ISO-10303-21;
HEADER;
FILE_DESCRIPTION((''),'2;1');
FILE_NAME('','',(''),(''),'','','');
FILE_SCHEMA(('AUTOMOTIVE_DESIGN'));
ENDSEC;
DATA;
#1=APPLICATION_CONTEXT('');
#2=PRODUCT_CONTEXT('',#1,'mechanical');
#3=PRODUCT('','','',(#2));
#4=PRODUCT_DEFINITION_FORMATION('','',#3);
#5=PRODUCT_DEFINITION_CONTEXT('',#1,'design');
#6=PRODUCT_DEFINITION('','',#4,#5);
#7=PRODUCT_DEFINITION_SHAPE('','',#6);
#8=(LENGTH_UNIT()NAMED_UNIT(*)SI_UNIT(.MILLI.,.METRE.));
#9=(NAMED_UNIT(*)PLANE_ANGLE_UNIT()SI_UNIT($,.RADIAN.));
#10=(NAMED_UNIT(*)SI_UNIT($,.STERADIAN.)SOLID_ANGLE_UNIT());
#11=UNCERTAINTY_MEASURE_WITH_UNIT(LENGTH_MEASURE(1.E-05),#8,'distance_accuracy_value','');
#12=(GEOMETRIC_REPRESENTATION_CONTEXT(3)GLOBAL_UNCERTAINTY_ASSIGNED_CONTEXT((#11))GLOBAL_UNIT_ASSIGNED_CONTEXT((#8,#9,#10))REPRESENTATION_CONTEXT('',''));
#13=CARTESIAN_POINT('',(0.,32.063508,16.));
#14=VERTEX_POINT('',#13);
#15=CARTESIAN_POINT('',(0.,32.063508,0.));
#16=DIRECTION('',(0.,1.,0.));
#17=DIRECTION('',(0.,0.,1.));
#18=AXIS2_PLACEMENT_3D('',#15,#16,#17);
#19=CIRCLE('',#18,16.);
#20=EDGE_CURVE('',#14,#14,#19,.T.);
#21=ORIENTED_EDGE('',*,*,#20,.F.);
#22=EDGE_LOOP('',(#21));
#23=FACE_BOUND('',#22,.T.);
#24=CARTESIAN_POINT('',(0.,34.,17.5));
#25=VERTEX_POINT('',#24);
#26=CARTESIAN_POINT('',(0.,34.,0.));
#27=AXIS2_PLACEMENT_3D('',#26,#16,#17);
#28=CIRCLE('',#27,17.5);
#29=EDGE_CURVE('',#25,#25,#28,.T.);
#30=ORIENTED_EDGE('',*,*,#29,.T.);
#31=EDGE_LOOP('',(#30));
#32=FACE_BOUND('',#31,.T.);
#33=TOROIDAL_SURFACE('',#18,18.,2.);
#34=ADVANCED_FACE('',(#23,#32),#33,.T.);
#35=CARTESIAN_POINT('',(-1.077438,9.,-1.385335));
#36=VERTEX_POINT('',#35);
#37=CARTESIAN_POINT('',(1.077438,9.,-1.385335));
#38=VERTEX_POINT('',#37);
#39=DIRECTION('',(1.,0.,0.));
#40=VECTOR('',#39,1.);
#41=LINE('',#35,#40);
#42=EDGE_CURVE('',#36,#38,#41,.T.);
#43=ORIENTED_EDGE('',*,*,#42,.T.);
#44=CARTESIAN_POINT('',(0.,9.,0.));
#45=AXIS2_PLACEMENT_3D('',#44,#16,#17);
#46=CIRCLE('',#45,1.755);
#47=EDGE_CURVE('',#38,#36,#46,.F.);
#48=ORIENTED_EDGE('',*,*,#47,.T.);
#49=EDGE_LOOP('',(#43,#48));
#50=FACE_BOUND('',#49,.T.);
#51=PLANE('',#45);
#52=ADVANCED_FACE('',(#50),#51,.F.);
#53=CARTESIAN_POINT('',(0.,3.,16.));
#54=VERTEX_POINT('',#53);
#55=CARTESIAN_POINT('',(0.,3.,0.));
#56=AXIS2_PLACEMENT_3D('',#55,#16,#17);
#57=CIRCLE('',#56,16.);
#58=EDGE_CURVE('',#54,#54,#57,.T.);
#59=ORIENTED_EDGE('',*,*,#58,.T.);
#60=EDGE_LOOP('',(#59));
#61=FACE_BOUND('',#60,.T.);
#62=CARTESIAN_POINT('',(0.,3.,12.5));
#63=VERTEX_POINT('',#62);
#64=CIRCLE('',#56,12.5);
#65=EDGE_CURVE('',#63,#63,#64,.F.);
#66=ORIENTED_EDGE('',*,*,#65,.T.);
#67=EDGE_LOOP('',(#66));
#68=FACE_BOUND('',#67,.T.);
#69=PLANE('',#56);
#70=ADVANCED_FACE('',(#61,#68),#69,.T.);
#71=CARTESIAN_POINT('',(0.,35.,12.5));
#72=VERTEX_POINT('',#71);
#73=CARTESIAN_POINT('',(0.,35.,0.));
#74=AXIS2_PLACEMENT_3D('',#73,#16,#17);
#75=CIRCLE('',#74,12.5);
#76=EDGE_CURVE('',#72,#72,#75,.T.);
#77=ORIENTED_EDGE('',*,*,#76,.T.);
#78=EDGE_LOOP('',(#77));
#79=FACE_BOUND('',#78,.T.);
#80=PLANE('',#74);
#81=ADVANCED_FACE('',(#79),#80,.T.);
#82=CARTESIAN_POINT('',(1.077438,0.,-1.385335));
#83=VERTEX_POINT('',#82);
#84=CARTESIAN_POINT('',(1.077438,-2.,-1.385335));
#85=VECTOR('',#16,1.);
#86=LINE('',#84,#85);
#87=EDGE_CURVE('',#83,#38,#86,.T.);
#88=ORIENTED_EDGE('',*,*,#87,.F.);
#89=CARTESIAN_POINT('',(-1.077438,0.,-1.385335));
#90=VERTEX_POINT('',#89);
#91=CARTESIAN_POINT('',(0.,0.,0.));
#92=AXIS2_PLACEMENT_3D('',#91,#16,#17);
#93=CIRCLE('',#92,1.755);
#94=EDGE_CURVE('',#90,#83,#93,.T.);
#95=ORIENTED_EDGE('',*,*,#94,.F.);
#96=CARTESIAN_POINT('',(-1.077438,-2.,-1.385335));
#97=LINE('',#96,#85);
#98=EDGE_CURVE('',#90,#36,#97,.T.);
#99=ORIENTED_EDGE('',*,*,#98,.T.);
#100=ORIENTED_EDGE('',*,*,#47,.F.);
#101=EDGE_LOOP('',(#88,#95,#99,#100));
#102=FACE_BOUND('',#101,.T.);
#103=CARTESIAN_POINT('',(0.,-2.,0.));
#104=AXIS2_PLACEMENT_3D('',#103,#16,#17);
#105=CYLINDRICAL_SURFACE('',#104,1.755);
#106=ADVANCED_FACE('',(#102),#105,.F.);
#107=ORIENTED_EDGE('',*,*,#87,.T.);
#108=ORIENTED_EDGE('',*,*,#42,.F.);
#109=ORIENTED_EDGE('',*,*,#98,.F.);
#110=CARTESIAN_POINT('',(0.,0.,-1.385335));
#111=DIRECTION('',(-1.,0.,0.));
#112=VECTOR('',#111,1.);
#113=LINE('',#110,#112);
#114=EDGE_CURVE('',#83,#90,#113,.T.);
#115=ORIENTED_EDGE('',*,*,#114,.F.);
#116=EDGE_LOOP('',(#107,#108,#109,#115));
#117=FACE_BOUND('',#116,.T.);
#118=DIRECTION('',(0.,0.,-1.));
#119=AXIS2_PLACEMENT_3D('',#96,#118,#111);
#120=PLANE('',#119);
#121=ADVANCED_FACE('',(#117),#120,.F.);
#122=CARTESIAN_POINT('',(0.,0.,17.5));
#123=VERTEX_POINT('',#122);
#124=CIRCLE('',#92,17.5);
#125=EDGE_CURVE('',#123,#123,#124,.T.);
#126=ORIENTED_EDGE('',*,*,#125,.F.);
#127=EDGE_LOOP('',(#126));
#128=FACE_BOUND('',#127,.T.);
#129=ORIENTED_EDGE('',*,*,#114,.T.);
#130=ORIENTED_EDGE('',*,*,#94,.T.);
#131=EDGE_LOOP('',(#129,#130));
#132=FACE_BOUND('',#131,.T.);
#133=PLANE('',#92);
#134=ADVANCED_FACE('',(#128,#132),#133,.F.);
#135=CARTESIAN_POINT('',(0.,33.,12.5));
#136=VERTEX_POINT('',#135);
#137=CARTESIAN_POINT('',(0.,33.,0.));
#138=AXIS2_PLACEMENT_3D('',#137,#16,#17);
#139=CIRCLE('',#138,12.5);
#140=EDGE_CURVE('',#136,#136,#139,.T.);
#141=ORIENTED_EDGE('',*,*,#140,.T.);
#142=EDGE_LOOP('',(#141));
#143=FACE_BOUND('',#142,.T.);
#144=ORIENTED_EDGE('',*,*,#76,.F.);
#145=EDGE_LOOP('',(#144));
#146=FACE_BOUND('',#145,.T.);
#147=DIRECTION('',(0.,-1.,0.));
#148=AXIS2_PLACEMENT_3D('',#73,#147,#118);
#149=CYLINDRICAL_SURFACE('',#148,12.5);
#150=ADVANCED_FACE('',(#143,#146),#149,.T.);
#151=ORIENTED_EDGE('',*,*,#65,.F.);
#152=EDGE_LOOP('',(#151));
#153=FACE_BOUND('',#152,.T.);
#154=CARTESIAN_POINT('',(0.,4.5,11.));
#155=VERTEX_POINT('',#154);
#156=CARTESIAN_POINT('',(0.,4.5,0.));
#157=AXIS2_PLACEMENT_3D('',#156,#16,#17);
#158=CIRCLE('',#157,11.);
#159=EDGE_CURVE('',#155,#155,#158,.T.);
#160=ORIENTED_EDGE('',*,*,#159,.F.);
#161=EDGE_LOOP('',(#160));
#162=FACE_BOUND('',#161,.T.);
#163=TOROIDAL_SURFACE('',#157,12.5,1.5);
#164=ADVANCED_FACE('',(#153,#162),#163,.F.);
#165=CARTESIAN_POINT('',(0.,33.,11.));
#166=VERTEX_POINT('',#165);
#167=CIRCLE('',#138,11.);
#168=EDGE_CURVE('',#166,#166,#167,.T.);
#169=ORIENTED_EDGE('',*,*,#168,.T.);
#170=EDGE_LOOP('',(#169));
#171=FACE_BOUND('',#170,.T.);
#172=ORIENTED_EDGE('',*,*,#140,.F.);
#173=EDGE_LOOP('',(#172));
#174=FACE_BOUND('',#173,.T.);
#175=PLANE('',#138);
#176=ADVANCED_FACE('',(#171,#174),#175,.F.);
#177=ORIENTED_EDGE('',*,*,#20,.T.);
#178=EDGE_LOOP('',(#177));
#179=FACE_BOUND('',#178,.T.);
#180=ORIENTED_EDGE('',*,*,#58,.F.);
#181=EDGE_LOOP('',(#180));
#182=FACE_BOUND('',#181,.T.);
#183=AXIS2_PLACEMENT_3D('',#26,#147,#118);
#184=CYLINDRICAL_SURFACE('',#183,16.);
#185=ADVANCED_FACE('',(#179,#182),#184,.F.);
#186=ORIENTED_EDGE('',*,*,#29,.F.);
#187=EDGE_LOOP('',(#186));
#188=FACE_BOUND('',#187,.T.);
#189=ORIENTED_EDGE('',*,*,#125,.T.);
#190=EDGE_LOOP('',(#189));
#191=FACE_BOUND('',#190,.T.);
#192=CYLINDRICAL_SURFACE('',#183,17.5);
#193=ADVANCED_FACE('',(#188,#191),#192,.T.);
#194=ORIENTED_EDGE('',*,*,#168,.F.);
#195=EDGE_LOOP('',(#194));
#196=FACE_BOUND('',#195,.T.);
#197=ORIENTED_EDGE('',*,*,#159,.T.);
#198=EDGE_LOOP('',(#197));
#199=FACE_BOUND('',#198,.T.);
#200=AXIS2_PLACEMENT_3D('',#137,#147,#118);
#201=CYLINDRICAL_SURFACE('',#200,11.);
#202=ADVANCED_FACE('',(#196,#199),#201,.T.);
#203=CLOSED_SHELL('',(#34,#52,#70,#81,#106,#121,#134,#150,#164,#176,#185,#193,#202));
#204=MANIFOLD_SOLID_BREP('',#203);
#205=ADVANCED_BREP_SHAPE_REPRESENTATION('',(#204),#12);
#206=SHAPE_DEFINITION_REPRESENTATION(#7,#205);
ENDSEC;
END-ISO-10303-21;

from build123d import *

# Parameters (mm, degrees)
SKETCH1_R           = 17.5
SKETCH1_R_2         = 16
BOSS_EXTRUDE1_DEPTH = 34
SKETCH2_R           = 17.5
BOSS_EXTRUDE2_DEPTH = 3
FILLET1_R           = 2
SKETCH3_R           = 11
BOSS_EXTRUDE3_DEPTH = 30
CUT_EXTRUDE1_DEPTH  = 35
SKETCH6_W           = 7.99098924
SKETCH6_H           = 6.392791393
BOSS_EXTRUDE4_DEPTH = 24
FILLET3_R           = 1.5
SKETCH8_R           = 12.5
BOSS_EXTRUDE5_DEPTH = 2


with BuildPart() as part:
    # Sketch1 → Boss-Extrude1 (new body)
    with BuildSketch(Plane(origin=(0, 0, 0), x_dir=(1, 0, 0), z_dir=(0, 1, 0))):
        with Locations(Location((0, 0, 0), (0, 0, 270))):
            Circle(SKETCH1_R)
        with Locations(Location((0, 0, 0), (0, 0, 270))):
            Circle(SKETCH1_R_2, mode=Mode.SUBTRACT)
    extrude(amount=BOSS_EXTRUDE1_DEPTH)

    # Sketch2 → Boss-Extrude2 (add)
    with BuildSketch(Plane(origin=(0, 0, 0), x_dir=(1, 0, 0), z_dir=(0, 1, 0))):
        with Locations(Location((0, 0, 0), (0, 0, 270))):
            Circle(SKETCH2_R)
    extrude(amount=BOSS_EXTRUDE2_DEPTH)

    # Fillet1
    # the kernel refuses this fillet: 2 mm, written as the material it takes off along each edge
    with BuildSketch(Plane(origin=(0, 34, 0), x_dir=(0, 0, 1), z_dir=(-1, 0, 0))) as fillet1_piece_1:
        with BuildLine():
            CenterArc((18, -1.936491673), FILLET1_R, 104.477512186, 75.522487814)
            Line((16, -1.936491673), (15.96, -1.936491673))
            Line((15.96, -1.936491673), (15.96, 0))
            Line((15.96, 0), (16, 0.04))
            ThreePointArc((16, 0.04), (16.75, 0.04), (17.49, 0.038729833))
            Line((17.49, 0.038729833), (17.5, 0))
        make_face()
    revolve(axis=Axis((0, 34, 0), (0, 1, 0)), mode=Mode.SUBTRACT)

    # Sketch3 → Boss-Extrude3 (add)
    with BuildSketch(Plane(origin=(0, 3, 0), x_dir=(1, 0, 0), z_dir=(0, 1, 0))):
        with Locations(Location((0, 0, 0), (0, 0, 270))):
            Circle(SKETCH3_R)
    extrude(amount=BOSS_EXTRUDE3_DEPTH)

    # Sketch5 → Cut-Extrude1 (cut)
    with BuildSketch(Plane(origin=(0, 33, 0), x_dir=(1, 0, 0), z_dir=(0, 1, 0))):
        with BuildLine():
            Line((-1.077438314, 1.385334501), (1.077438314, 1.385334501))
            ThreePointArc((1.077438314, 1.385334501), (0, -1.755), (-1.077438314, 1.385334501))
        make_face()
    extrude(amount=-CUT_EXTRUDE1_DEPTH, mode=Mode.SUBTRACT)

    # Sketch6 → Boss-Extrude4 (add)
    with BuildSketch(Plane(origin=(0, 33, 0), x_dir=(1, 0, 0), z_dir=(0, 1, 0))):
        with Locations((0.014035957, -0.788514839)):
            Rectangle(SKETCH6_W, SKETCH6_H)
    extrude(amount=-BOSS_EXTRUDE4_DEPTH)

    # Fillet3
    fillet3_edges = [part.edges().sort_by_distance(p)[0] for p in [
        (0, 3, -11),
    ]]
    fillet(fillet3_edges, radius=FILLET3_R)

    # Sketch8 → Boss-Extrude5 (add)
    with BuildSketch(Plane(origin=(0, 33, 0), x_dir=(1, 0, 0), z_dir=(0, 1, 0))):
        with Locations(Location((0, 0, 0), (0, 0, 270))):
            Circle(SKETCH8_R)
    extrude(amount=BOSS_EXTRUDE5_DEPTH)


solid = part.part
